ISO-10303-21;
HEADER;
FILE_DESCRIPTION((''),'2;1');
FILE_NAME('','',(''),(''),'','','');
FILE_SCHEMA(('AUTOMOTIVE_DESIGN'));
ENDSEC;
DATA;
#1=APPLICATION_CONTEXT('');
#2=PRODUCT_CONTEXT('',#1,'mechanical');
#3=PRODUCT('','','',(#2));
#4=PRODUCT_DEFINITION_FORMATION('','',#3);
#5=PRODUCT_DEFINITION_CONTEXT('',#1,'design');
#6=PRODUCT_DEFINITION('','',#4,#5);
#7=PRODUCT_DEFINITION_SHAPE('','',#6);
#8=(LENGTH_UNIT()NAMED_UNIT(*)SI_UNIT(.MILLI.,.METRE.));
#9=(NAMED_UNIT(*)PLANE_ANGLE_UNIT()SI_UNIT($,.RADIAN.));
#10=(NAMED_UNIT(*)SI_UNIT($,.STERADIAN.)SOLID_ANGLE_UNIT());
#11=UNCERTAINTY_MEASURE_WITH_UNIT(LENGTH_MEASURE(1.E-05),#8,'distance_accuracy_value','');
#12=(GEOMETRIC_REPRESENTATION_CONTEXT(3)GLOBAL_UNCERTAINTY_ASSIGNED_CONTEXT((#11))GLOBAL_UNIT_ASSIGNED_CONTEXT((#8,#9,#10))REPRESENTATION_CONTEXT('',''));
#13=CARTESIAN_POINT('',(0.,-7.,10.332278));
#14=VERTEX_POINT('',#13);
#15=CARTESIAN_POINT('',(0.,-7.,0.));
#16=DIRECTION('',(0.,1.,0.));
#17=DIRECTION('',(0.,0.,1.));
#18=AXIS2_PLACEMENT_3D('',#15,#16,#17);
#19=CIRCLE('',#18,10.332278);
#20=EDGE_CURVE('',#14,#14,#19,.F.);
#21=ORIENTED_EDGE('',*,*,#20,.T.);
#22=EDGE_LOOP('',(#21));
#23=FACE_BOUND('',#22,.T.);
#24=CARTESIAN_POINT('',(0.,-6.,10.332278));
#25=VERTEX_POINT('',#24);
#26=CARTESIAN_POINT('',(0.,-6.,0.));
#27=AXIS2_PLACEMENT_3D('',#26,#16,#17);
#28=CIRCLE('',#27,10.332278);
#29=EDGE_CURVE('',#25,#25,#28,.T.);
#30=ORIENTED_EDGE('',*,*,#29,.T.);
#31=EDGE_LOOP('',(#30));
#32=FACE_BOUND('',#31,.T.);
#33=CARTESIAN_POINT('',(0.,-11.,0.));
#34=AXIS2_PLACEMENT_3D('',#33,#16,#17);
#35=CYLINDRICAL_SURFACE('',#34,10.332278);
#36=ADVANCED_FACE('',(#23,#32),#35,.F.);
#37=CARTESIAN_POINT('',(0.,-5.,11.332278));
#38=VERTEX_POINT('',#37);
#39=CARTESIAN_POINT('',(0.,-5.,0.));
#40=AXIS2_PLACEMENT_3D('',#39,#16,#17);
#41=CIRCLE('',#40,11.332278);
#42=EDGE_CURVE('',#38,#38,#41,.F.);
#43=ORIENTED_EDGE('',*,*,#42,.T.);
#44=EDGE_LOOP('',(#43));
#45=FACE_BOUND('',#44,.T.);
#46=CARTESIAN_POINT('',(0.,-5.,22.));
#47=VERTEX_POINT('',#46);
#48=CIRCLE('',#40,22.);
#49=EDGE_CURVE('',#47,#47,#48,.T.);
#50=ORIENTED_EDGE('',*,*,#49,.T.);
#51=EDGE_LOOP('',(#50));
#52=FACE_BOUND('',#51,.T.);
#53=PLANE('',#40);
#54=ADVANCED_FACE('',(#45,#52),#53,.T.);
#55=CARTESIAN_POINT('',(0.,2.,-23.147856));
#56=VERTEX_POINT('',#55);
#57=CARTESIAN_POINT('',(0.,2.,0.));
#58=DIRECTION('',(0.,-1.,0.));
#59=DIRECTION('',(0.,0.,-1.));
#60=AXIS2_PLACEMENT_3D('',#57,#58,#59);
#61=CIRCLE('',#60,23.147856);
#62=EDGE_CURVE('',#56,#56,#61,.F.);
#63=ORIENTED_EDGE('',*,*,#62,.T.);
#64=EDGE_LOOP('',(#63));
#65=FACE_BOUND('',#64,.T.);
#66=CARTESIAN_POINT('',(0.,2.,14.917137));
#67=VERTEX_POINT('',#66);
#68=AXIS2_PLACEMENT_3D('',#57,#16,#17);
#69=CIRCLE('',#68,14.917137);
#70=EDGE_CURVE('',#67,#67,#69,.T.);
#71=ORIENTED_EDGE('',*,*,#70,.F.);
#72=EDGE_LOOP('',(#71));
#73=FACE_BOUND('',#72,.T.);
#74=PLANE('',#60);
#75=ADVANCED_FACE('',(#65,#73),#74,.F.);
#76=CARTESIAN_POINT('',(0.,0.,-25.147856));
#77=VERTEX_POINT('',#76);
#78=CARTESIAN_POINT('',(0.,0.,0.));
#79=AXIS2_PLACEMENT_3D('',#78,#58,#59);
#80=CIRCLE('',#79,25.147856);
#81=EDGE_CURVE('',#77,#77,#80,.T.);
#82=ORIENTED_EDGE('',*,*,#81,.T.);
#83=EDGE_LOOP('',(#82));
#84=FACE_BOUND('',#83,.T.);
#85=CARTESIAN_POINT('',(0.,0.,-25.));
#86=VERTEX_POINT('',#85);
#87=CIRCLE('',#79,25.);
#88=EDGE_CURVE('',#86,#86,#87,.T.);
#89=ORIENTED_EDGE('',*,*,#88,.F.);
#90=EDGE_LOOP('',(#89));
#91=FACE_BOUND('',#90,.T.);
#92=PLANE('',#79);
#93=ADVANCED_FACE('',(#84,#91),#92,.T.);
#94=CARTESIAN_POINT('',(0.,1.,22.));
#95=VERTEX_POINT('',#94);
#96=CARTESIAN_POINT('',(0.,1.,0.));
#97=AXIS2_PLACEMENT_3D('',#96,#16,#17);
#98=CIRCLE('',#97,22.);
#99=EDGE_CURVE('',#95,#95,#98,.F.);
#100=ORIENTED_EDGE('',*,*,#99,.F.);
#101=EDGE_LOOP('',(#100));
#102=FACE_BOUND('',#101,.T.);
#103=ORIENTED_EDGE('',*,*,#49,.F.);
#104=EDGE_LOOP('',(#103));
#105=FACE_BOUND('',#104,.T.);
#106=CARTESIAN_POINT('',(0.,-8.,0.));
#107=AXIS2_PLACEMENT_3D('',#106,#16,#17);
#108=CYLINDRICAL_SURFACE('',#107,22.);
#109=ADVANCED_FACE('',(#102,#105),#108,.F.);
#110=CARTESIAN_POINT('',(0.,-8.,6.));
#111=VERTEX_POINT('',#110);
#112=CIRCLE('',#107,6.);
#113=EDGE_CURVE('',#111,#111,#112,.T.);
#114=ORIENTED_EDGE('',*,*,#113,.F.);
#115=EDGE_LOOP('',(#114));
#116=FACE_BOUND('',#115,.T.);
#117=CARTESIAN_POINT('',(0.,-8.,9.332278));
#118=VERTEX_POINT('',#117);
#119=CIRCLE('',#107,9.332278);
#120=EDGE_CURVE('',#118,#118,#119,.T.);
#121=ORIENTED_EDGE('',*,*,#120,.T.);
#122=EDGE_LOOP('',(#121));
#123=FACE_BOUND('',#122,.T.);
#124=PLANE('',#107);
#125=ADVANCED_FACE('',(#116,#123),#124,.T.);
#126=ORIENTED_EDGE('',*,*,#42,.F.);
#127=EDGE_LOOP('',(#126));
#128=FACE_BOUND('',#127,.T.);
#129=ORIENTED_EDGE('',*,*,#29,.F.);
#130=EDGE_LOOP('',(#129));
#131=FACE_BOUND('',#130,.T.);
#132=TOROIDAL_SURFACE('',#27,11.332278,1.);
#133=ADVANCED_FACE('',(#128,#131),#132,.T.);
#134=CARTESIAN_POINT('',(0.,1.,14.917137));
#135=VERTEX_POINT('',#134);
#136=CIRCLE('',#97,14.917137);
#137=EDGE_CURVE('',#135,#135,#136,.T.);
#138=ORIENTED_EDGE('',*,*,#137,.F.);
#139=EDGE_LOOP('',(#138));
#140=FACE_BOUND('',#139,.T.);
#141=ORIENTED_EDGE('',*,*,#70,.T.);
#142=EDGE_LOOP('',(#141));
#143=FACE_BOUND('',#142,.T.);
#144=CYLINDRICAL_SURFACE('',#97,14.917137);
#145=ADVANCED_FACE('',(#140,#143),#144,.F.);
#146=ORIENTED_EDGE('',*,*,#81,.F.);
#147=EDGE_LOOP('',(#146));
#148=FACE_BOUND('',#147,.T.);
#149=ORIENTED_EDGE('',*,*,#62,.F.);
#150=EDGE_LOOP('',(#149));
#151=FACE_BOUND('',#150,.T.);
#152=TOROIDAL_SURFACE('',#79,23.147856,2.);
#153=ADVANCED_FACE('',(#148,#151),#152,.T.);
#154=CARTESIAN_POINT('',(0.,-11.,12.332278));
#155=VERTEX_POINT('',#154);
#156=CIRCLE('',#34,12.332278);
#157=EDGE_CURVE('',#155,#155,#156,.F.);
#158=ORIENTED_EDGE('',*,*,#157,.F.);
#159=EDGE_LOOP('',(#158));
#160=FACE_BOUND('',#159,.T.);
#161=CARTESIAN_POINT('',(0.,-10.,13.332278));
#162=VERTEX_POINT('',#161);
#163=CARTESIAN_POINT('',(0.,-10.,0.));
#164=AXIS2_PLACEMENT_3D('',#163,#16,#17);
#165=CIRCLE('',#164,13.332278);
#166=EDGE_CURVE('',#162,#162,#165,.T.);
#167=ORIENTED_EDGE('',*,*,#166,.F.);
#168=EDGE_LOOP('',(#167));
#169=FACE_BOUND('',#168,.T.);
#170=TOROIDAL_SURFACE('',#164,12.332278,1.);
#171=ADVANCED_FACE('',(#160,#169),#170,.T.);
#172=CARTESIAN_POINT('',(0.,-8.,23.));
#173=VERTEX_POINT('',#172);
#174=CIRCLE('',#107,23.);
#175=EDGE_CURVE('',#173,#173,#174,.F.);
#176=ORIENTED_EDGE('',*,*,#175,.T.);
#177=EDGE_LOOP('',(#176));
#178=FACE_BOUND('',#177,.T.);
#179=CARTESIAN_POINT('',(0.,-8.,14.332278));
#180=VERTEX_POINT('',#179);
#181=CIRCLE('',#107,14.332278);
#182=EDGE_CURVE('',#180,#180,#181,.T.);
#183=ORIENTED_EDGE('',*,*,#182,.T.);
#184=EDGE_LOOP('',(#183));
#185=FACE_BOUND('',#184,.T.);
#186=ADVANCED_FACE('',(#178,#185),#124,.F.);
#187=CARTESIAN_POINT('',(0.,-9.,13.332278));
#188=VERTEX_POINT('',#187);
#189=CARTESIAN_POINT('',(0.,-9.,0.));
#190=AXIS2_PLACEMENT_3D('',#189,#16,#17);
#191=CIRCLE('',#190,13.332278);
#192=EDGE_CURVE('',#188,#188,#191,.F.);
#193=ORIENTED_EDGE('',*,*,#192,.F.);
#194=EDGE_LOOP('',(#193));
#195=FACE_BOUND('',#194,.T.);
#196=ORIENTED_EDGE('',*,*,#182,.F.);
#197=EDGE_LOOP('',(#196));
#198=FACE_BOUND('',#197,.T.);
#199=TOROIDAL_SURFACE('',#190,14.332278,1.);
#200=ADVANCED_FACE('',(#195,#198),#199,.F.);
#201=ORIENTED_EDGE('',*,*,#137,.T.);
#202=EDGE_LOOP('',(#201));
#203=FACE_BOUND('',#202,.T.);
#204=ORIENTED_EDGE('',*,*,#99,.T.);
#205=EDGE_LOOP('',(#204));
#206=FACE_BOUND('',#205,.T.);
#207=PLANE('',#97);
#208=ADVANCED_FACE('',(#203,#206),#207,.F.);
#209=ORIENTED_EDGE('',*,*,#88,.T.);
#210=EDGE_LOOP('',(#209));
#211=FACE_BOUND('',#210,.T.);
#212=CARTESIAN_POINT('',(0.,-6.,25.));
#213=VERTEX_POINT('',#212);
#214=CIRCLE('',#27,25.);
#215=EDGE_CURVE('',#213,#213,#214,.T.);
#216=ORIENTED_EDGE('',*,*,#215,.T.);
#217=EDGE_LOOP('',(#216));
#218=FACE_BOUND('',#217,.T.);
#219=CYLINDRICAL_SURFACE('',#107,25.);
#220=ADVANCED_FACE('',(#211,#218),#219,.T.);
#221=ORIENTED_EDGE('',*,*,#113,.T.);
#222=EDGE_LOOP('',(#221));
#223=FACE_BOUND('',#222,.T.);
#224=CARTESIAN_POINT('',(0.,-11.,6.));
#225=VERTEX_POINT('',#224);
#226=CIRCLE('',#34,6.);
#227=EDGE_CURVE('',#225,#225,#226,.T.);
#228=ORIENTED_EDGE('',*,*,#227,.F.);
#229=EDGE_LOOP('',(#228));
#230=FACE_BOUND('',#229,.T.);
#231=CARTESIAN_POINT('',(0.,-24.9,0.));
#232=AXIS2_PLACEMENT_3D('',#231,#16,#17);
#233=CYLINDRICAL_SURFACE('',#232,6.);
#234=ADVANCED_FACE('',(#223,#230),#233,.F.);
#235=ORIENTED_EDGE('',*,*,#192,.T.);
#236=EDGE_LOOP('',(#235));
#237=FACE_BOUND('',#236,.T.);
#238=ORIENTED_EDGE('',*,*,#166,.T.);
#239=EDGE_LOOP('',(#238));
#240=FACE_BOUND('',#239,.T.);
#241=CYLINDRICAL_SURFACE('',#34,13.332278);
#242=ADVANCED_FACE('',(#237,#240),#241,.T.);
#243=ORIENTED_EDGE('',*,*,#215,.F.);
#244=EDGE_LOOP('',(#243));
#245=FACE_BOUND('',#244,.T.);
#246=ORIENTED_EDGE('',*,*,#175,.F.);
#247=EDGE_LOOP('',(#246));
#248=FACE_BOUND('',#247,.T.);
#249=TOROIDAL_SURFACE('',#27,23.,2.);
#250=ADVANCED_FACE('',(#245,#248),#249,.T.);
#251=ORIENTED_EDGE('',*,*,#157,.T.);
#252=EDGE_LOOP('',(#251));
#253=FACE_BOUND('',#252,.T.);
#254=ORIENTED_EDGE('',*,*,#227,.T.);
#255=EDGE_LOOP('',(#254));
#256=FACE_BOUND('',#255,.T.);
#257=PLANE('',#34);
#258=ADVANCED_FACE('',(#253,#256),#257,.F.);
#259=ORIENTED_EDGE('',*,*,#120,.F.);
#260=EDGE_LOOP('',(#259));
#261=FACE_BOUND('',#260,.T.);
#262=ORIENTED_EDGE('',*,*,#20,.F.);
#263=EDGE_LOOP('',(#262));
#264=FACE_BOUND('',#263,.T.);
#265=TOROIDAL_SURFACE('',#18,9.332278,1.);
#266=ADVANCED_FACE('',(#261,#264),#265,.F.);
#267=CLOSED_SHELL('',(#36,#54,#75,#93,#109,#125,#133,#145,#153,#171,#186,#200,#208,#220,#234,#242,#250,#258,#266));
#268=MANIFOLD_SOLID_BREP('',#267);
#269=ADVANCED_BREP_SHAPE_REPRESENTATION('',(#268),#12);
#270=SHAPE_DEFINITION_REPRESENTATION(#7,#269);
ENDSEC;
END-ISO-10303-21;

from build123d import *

# Parameters (mm, degrees)
SKETCH_2_W          = 100
SKETCH_2_H          = 85
SKETCH_2_R          = 6
EXTRUDE_1_DEPTH     = 2
SKETCH_3_R          = 25
EXTRUDE_2_DEPTH     = 10
SHELL_START         = -5
SHELL_1_OUTLINE_R   = 22
SHELL_1_DEPTH       = 7
SKETCH_5_R          = 13.33227761
EXTRUDE_3_DEPTH     = 6
SHELL_START_2       = -8
SHELL_2_OUTLINE_R   = 10.33227761
SHELL_2_DEPTH       = 3
FILLET_2_R          = 1
SKETCH_4_R          = 6
CUT_EXTRUDE_2_DEPTH = 19.9
FILLET_3_R          = 1
FILLET_4_R          = 0.25
SKETCH_6_W          = 123.403818804
SKETCH_6_H          = 106.493808558
SKETCH_6_R          = 25.147855886
CUT_EXTRUDE_3_DEPTH = 3
EXTRUDE_START       = -1
SKETCH_7_R          = 22
SKETCH_7_R_2        = 14.917136703
EXTRUDE_4_DEPTH     = 1
FILLET_5_R          = 2


# Read off the part's stored shape, not the designer's step: Оболочка1, Оболочка2
with BuildPart() as part:
    # Эскиз2 → Бобышка-Вытянуть1 (new body)
    with BuildSketch(Plane(origin=(0, 0, 0), x_dir=(1, 0, 0), z_dir=(0, 1, 0))):
        Rectangle(SKETCH_2_W, SKETCH_2_H)
        with Locations(Location((0, 0, 0), (0, 0, 270))):
            Circle(SKETCH_2_R, mode=Mode.SUBTRACT)
        with BuildLine():
            Line((35.797740165, 32.912374401), (38.380753328, 34.849634274))
            ThreePointArc((38.380753328, 34.849634274), (45.172510919, 33.879383189), (44.202259835, 27.087625599))
            Line((44.202259835, 27.087625599), (41.619246672, 25.150365726))
            ThreePointArc((41.619246672, 25.150365726), (34.827489081, 26.120616811), (35.797740165, 32.912374401))
        make_face(mode=Mode.SUBTRACT)
        with BuildLine():
            Line((-38.5, 34.5), (-36.1, 32.7))
            ThreePointArc((-36.1, 32.7), (-35.2, 26.4), (-41.5, 25.5))
            Line((-41.5, 25.5), (-43.9, 27.3))
            ThreePointArc((-43.9, 27.3), (-44.8, 33.6), (-38.5, 34.5))
        make_face(mode=Mode.SUBTRACT)
        with BuildLine():
            Line((38.5, -34.5), (36.1, -32.7))
            ThreePointArc((36.1, -32.7), (35.2, -26.4), (41.5, -25.5))
            Line((41.5, -25.5), (43.9, -27.3))
            ThreePointArc((43.9, -27.3), (44.8, -33.6), (38.5, -34.5))
        make_face(mode=Mode.SUBTRACT)
        with BuildLine():
            Line((-43.9, -27.3), (-41.5, -25.5))
            ThreePointArc((-41.5, -25.5), (-35.2, -26.4), (-36.1, -32.7))
            Line((-36.1, -32.7), (-38.5, -34.5))
            ThreePointArc((-38.5, -34.5), (-44.8, -33.6), (-43.9, -27.3))
        make_face(mode=Mode.SUBTRACT)
    extrude(amount=EXTRUDE_1_DEPTH)

    # Эскиз3 → Бобышка-Вытянуть2 (add)
    with BuildSketch(Plane(origin=(0, 2, 0), x_dir=(1, 0, 0), z_dir=(0, 1, 0))):
        with Locations(Location((0, 0, 0), (0, 0, 270))):
            Circle(SKETCH_3_R)
    extrude(amount=-EXTRUDE_2_DEPTH)

    # Оболочка1 outline → Оболочка1 (cut)
    with BuildSketch(Plane(origin=(0, 0, 0), x_dir=(1, 0, 0), z_dir=(0, 1, 0)).offset(SHELL_START)):
        Circle(SHELL_1_OUTLINE_R)
    extrude(amount=SHELL_1_DEPTH, mode=Mode.SUBTRACT)

    # Эскиз5 → Бобышка-Вытянуть3 (add)
    with BuildSketch(Plane(origin=(0, -5, 0), x_dir=(1, 0, 0), z_dir=(0, 1, 0))):
        with Locations(Location((0, 0, 0), (0, 0, 270))):
            Circle(SKETCH_5_R)
    extrude(amount=-EXTRUDE_3_DEPTH)

    # Оболочка2 outline → Оболочка2 (cut)
    with BuildSketch(Plane(origin=(0, 0, 0), x_dir=(1, 0, 0), z_dir=(0, 1, 0)).offset(SHELL_START_2)):
        Circle(SHELL_2_OUTLINE_R)
    extrude(amount=SHELL_2_DEPTH, mode=Mode.SUBTRACT)

    # Скругление2
    fillet_2_edges = [part.edges().sort_by_distance(p)[0] for p in [
        (0, -11, -13.33227761),
        (0, -8, -13.33227761),
        (-10.33227761, -5, 0),
        (-10.33227761, -8, 0),
    ]]
    fillet(fillet_2_edges, radius=FILLET_2_R)

    # Эскиз4 → Вырез-Вытянуть2 (cut, symmetric)
    with BuildSketch(Plane(origin=(0, -5, 0), x_dir=(1, 0, 0), z_dir=(0, 1, 0))):
        with Locations(Location((0, 0, 0), (0, 0, 270))):
            Circle(SKETCH_4_R)
    extrude(amount=CUT_EXTRUDE_2_DEPTH, both=True, mode=Mode.SUBTRACT)

    # Скругление3
    fillet_3_edges = [part.edges().sort_by_distance(p)[0] for p in [
        (50, 1, 42.5),
        (-50, 1, 42.5),
        (-50, 1, -42.5),
        (50, 1, -42.5),
    ]]
    fillet(fillet_3_edges, radius=FILLET_3_R)

    # Скругление4
    fillet_4_edges = [part.edges().sort_by_distance(p)[0] for p in [
        (50, 0, 0),
        (50, 2, 0),
        (0, 0, 42.5),
        (-50, 0, 0),
        (0, 0, -42.5),
        (-49.707106781, 0, 42.207106781),
        (-49.707106781, 0, -42.207106781),
        (49.707106781, 0, -42.207106781),
        (49.707106781, 0, 42.207106781),
        (0, 2, 42.5),
        (0, 2, -42.5),
        (-50, 2, 0),
        (-49.707106781, 2, 42.207106781),
        (-49.707106781, 2, -42.207106781),
        (49.707106781, 2, -42.207106781),
        (49.707106781, 2, 42.207106781),
    ]]
    fillet(fillet_4_edges, radius=FILLET_4_R)

    # Эскиз6 → Вырез-Вытянуть3 (cut)
    with BuildSketch(Plane(origin=(0, 2, 0), x_dir=(1, 0, 0), z_dir=(0, 1, 0))):
        Rectangle(SKETCH_6_W, SKETCH_6_H)
        with Locations(Location((0, 0, 0), (0, 0, 270))):
            Circle(SKETCH_6_R, mode=Mode.SUBTRACT)
    extrude(amount=-CUT_EXTRUDE_3_DEPTH, mode=Mode.SUBTRACT)

    # Эскиз7 → Бобышка-Вытянуть4 (add)
    with BuildSketch(Plane(origin=(0, 2, 0), x_dir=(1, 0, 0), z_dir=(0, 1, 0)).offset(EXTRUDE_START)):
        with Locations(Location((0, 0, 0), (0, 0, 270))):
            Circle(SKETCH_7_R)
        with Locations(Location((0, 0, 0), (0, 0, 270))):
            Circle(SKETCH_7_R_2, mode=Mode.SUBTRACT)
    extrude(amount=EXTRUDE_4_DEPTH)

    # Скругление5
    fillet_5_edges = [part.edges().sort_by_distance(p)[0] for p in [
        (0, 2, -25.147855886),
        (0, -8, -25),
    ]]
    fillet(fillet_5_edges, radius=FILLET_5_R - 0.0001)  # a hair under: the kernel refuses the full size


solid = part.part
